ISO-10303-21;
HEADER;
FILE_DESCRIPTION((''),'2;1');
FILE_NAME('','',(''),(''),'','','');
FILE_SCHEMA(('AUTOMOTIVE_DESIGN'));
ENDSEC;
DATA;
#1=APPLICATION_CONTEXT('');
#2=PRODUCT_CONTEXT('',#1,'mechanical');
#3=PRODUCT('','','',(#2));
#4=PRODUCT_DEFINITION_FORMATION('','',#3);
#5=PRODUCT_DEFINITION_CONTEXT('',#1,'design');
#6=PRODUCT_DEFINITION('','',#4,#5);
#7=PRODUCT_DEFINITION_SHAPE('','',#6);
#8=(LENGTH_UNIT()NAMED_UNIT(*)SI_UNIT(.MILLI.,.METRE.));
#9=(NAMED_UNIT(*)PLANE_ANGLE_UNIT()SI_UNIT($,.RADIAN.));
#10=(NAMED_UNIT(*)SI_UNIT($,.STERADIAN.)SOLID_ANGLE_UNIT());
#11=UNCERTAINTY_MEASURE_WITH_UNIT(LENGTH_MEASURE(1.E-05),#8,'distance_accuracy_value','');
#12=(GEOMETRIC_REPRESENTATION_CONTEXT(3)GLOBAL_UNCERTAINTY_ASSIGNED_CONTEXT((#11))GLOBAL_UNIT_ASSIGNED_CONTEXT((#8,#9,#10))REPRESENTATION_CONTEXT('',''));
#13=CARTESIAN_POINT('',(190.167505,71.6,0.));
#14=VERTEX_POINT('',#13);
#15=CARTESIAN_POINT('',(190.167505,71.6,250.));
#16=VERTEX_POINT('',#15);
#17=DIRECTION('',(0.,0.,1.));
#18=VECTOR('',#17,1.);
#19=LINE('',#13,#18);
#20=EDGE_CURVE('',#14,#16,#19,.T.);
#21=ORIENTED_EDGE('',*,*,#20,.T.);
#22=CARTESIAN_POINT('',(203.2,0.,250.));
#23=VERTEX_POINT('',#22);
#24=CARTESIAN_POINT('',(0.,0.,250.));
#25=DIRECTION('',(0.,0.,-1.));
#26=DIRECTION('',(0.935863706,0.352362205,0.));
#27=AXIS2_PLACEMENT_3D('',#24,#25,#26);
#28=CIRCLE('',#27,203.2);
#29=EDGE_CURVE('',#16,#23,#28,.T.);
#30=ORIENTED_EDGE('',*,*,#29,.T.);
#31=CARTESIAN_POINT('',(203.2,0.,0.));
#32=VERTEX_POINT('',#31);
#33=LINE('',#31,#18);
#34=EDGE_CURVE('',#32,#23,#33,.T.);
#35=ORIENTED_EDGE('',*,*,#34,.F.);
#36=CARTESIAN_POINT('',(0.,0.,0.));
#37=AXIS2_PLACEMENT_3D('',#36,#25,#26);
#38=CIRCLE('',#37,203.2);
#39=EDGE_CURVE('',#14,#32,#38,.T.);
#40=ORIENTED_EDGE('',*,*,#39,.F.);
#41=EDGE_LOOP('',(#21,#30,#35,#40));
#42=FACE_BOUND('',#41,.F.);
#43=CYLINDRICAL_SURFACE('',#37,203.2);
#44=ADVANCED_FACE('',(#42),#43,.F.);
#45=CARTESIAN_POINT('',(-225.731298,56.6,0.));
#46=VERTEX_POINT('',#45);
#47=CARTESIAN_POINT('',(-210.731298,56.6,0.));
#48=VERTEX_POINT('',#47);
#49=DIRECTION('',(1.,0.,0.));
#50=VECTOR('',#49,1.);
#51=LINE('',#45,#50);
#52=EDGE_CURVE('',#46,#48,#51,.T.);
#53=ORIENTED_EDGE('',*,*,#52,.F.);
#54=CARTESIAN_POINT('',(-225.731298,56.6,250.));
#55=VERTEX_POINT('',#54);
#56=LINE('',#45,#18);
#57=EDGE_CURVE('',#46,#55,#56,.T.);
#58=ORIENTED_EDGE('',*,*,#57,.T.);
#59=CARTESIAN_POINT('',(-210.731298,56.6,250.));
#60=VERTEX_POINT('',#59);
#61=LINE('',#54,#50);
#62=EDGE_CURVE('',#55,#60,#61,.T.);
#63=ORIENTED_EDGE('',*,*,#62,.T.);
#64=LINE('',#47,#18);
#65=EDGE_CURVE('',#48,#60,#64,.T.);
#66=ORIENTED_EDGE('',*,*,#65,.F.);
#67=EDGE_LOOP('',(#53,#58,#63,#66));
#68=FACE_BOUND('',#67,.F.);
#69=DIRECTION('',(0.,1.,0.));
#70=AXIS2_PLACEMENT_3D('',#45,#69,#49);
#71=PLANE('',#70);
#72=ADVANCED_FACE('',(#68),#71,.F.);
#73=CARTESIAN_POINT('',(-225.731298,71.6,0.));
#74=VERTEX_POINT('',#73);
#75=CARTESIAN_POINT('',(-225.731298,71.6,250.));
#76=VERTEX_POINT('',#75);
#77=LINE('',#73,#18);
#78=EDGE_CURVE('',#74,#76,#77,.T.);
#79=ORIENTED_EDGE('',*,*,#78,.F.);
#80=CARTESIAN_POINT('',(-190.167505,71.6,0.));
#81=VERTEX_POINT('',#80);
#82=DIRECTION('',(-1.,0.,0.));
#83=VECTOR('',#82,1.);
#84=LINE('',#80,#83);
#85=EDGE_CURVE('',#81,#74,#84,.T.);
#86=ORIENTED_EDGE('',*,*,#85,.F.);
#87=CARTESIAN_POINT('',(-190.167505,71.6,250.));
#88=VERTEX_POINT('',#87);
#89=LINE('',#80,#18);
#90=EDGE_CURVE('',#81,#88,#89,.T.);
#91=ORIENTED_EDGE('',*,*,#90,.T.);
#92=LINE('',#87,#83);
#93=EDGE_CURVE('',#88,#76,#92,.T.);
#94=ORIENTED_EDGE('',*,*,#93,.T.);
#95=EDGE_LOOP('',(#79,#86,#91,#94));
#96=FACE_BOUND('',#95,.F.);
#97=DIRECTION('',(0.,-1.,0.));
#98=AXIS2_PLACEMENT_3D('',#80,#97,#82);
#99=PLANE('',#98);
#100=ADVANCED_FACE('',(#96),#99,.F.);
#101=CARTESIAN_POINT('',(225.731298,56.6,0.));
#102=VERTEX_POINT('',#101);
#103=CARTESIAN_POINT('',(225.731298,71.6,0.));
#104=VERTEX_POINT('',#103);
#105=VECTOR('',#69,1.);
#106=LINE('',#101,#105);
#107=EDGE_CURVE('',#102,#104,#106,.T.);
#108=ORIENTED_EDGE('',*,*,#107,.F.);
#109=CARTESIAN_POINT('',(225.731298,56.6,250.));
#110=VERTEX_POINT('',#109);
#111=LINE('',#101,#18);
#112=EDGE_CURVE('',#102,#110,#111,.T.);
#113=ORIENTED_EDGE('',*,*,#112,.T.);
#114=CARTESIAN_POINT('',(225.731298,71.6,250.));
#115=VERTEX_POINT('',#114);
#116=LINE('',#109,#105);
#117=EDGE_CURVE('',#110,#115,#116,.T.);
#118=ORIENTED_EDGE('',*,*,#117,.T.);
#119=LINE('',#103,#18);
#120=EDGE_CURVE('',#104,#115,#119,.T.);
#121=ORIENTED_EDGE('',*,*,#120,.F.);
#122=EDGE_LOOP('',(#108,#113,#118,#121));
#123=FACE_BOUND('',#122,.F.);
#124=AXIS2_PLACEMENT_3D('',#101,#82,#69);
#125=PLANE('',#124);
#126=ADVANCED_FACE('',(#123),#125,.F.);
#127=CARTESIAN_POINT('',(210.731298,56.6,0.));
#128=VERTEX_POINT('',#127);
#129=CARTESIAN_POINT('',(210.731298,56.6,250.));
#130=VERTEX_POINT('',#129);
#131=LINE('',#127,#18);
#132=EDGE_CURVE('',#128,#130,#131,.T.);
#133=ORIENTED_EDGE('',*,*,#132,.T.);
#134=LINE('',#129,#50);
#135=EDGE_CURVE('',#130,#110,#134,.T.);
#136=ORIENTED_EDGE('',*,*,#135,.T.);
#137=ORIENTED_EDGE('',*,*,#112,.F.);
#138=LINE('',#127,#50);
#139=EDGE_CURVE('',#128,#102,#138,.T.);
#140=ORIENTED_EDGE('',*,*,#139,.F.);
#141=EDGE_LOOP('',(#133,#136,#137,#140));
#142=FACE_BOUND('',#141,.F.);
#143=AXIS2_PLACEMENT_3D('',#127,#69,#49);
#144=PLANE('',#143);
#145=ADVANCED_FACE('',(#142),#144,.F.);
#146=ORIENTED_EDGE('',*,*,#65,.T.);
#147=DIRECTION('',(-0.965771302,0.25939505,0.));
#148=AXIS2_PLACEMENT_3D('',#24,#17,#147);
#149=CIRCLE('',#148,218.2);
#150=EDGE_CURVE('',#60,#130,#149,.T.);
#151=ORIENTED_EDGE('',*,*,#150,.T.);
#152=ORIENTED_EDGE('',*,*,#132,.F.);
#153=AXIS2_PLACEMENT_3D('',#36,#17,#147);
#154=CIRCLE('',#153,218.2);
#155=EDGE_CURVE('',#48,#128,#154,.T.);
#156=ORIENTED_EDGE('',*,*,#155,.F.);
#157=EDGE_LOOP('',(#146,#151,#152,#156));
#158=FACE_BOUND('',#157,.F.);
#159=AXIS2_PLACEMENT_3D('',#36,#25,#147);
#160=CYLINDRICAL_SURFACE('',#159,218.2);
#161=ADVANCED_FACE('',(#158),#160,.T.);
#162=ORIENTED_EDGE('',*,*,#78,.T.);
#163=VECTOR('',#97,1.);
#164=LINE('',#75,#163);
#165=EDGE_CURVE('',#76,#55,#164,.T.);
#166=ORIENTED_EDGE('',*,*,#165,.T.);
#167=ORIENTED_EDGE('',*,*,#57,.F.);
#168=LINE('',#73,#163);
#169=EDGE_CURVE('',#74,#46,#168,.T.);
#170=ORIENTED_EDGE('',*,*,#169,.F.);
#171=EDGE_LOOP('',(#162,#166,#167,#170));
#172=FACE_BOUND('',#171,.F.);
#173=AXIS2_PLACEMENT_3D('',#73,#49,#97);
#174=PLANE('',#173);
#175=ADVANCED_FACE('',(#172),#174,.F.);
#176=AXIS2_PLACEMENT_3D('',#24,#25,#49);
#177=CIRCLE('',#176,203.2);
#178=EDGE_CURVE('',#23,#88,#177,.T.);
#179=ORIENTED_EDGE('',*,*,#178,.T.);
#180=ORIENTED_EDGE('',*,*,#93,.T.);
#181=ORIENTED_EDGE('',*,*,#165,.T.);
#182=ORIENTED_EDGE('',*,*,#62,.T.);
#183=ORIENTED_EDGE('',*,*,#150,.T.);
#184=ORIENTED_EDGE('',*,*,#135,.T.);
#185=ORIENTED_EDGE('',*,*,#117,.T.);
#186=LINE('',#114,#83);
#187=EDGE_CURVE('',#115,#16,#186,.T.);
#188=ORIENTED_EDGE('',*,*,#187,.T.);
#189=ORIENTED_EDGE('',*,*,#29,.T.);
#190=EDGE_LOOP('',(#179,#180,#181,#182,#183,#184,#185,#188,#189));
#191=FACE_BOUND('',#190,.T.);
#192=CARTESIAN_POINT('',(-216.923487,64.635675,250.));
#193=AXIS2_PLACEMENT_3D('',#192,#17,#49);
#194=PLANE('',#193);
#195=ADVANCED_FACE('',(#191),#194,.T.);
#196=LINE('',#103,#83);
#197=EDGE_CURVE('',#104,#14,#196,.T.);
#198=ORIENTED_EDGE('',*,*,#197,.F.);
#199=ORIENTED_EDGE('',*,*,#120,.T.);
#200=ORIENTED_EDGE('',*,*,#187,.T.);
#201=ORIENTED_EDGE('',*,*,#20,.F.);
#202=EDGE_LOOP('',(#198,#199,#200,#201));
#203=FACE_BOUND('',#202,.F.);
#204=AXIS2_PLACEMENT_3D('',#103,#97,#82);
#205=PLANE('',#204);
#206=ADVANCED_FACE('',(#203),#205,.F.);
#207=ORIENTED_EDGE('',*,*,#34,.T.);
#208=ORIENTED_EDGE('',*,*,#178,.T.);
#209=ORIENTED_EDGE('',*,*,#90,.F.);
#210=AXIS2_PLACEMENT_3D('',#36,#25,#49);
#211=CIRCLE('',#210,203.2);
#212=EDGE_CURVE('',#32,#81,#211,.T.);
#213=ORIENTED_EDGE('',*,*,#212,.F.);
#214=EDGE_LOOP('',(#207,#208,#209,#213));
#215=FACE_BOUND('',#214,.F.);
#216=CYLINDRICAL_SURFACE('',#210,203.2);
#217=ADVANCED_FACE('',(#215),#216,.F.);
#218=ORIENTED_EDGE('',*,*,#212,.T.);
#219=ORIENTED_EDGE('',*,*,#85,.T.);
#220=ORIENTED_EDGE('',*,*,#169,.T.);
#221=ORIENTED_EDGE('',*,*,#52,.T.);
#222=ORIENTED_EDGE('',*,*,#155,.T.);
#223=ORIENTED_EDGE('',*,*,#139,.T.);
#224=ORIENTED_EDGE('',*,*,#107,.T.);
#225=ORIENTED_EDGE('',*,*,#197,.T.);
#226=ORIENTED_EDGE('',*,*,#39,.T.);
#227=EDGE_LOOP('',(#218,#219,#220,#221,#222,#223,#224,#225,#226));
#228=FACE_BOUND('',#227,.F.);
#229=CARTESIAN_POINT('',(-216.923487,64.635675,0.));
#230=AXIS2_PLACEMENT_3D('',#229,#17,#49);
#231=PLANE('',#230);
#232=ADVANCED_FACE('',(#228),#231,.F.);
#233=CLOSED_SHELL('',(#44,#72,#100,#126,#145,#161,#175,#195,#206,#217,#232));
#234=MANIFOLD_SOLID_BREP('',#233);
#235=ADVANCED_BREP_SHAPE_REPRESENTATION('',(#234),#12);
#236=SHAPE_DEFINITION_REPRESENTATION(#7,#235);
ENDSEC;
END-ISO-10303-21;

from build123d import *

# Parameters (mm, degrees)
F1_DEPTH = 250


# Not quite as in the source:
# - a feature names something its author has since deleted; it is built from what else it names


with BuildPart() as f1:
    # F0 (on Top) → F1 (new body)
    with BuildSketch(Plane.XY):
        with BuildLine():
            Line((-225.7312981026, 56.6), (-210.7312981026, 56.6))
            ThreePointArc((-210.7312981026, 56.6), (-208.5596069481, 64.1414869616), (-206.1181214741, 71.6))
            Line((-206.1181214741, 71.6), (-225.7312981026, 71.6))
            Line((-225.7312981026, 71.6), (-225.7312981026, 56.6))
        make_face()
        with BuildLine():
            ThreePointArc((206.1181214741, 71.6), (208.5596069481, 64.1414869616), (210.7312981026, 56.6))
            Line((210.7312981026, 56.6), (225.7312981026, 56.6))
            Line((225.7312981026, 56.6), (225.7312981026, 71.6))
            Line((225.7312981026, 71.6), (206.1181214741, 71.6))
        make_face()
        with BuildLine():
            ThreePointArc((-210.7312981026, 56.6), (-28.5453214557, -216.3247665502), (218.2, 0))
            ThreePointArc((218.2, 0), (216.3247665502, 28.5453214557), (210.7312981026, 56.6))
            ThreePointArc((210.7312981026, 56.6), (208.5596069481, 64.1414869616), (206.1181214741, 71.6))
            Line((206.1181214741, 71.6), (190.1675051106, 71.6))
            ThreePointArc((190.1675051106, 71.6), (199.9153283749, 36.3882052424), (203.2, 0))
            ThreePointArc((203.2, 0), (-36.3882052424, -199.9153283749), (-190.1675051106, 71.6))
            Line((-190.1675051106, 71.6), (-206.1181214741, 71.6))
            ThreePointArc((-206.1181214741, 71.6), (-208.5596069481, 64.1414869616), (-210.7312981026, 56.6))
        make_face()
    extrude(amount=F1_DEPTH)


solid = f1.part
